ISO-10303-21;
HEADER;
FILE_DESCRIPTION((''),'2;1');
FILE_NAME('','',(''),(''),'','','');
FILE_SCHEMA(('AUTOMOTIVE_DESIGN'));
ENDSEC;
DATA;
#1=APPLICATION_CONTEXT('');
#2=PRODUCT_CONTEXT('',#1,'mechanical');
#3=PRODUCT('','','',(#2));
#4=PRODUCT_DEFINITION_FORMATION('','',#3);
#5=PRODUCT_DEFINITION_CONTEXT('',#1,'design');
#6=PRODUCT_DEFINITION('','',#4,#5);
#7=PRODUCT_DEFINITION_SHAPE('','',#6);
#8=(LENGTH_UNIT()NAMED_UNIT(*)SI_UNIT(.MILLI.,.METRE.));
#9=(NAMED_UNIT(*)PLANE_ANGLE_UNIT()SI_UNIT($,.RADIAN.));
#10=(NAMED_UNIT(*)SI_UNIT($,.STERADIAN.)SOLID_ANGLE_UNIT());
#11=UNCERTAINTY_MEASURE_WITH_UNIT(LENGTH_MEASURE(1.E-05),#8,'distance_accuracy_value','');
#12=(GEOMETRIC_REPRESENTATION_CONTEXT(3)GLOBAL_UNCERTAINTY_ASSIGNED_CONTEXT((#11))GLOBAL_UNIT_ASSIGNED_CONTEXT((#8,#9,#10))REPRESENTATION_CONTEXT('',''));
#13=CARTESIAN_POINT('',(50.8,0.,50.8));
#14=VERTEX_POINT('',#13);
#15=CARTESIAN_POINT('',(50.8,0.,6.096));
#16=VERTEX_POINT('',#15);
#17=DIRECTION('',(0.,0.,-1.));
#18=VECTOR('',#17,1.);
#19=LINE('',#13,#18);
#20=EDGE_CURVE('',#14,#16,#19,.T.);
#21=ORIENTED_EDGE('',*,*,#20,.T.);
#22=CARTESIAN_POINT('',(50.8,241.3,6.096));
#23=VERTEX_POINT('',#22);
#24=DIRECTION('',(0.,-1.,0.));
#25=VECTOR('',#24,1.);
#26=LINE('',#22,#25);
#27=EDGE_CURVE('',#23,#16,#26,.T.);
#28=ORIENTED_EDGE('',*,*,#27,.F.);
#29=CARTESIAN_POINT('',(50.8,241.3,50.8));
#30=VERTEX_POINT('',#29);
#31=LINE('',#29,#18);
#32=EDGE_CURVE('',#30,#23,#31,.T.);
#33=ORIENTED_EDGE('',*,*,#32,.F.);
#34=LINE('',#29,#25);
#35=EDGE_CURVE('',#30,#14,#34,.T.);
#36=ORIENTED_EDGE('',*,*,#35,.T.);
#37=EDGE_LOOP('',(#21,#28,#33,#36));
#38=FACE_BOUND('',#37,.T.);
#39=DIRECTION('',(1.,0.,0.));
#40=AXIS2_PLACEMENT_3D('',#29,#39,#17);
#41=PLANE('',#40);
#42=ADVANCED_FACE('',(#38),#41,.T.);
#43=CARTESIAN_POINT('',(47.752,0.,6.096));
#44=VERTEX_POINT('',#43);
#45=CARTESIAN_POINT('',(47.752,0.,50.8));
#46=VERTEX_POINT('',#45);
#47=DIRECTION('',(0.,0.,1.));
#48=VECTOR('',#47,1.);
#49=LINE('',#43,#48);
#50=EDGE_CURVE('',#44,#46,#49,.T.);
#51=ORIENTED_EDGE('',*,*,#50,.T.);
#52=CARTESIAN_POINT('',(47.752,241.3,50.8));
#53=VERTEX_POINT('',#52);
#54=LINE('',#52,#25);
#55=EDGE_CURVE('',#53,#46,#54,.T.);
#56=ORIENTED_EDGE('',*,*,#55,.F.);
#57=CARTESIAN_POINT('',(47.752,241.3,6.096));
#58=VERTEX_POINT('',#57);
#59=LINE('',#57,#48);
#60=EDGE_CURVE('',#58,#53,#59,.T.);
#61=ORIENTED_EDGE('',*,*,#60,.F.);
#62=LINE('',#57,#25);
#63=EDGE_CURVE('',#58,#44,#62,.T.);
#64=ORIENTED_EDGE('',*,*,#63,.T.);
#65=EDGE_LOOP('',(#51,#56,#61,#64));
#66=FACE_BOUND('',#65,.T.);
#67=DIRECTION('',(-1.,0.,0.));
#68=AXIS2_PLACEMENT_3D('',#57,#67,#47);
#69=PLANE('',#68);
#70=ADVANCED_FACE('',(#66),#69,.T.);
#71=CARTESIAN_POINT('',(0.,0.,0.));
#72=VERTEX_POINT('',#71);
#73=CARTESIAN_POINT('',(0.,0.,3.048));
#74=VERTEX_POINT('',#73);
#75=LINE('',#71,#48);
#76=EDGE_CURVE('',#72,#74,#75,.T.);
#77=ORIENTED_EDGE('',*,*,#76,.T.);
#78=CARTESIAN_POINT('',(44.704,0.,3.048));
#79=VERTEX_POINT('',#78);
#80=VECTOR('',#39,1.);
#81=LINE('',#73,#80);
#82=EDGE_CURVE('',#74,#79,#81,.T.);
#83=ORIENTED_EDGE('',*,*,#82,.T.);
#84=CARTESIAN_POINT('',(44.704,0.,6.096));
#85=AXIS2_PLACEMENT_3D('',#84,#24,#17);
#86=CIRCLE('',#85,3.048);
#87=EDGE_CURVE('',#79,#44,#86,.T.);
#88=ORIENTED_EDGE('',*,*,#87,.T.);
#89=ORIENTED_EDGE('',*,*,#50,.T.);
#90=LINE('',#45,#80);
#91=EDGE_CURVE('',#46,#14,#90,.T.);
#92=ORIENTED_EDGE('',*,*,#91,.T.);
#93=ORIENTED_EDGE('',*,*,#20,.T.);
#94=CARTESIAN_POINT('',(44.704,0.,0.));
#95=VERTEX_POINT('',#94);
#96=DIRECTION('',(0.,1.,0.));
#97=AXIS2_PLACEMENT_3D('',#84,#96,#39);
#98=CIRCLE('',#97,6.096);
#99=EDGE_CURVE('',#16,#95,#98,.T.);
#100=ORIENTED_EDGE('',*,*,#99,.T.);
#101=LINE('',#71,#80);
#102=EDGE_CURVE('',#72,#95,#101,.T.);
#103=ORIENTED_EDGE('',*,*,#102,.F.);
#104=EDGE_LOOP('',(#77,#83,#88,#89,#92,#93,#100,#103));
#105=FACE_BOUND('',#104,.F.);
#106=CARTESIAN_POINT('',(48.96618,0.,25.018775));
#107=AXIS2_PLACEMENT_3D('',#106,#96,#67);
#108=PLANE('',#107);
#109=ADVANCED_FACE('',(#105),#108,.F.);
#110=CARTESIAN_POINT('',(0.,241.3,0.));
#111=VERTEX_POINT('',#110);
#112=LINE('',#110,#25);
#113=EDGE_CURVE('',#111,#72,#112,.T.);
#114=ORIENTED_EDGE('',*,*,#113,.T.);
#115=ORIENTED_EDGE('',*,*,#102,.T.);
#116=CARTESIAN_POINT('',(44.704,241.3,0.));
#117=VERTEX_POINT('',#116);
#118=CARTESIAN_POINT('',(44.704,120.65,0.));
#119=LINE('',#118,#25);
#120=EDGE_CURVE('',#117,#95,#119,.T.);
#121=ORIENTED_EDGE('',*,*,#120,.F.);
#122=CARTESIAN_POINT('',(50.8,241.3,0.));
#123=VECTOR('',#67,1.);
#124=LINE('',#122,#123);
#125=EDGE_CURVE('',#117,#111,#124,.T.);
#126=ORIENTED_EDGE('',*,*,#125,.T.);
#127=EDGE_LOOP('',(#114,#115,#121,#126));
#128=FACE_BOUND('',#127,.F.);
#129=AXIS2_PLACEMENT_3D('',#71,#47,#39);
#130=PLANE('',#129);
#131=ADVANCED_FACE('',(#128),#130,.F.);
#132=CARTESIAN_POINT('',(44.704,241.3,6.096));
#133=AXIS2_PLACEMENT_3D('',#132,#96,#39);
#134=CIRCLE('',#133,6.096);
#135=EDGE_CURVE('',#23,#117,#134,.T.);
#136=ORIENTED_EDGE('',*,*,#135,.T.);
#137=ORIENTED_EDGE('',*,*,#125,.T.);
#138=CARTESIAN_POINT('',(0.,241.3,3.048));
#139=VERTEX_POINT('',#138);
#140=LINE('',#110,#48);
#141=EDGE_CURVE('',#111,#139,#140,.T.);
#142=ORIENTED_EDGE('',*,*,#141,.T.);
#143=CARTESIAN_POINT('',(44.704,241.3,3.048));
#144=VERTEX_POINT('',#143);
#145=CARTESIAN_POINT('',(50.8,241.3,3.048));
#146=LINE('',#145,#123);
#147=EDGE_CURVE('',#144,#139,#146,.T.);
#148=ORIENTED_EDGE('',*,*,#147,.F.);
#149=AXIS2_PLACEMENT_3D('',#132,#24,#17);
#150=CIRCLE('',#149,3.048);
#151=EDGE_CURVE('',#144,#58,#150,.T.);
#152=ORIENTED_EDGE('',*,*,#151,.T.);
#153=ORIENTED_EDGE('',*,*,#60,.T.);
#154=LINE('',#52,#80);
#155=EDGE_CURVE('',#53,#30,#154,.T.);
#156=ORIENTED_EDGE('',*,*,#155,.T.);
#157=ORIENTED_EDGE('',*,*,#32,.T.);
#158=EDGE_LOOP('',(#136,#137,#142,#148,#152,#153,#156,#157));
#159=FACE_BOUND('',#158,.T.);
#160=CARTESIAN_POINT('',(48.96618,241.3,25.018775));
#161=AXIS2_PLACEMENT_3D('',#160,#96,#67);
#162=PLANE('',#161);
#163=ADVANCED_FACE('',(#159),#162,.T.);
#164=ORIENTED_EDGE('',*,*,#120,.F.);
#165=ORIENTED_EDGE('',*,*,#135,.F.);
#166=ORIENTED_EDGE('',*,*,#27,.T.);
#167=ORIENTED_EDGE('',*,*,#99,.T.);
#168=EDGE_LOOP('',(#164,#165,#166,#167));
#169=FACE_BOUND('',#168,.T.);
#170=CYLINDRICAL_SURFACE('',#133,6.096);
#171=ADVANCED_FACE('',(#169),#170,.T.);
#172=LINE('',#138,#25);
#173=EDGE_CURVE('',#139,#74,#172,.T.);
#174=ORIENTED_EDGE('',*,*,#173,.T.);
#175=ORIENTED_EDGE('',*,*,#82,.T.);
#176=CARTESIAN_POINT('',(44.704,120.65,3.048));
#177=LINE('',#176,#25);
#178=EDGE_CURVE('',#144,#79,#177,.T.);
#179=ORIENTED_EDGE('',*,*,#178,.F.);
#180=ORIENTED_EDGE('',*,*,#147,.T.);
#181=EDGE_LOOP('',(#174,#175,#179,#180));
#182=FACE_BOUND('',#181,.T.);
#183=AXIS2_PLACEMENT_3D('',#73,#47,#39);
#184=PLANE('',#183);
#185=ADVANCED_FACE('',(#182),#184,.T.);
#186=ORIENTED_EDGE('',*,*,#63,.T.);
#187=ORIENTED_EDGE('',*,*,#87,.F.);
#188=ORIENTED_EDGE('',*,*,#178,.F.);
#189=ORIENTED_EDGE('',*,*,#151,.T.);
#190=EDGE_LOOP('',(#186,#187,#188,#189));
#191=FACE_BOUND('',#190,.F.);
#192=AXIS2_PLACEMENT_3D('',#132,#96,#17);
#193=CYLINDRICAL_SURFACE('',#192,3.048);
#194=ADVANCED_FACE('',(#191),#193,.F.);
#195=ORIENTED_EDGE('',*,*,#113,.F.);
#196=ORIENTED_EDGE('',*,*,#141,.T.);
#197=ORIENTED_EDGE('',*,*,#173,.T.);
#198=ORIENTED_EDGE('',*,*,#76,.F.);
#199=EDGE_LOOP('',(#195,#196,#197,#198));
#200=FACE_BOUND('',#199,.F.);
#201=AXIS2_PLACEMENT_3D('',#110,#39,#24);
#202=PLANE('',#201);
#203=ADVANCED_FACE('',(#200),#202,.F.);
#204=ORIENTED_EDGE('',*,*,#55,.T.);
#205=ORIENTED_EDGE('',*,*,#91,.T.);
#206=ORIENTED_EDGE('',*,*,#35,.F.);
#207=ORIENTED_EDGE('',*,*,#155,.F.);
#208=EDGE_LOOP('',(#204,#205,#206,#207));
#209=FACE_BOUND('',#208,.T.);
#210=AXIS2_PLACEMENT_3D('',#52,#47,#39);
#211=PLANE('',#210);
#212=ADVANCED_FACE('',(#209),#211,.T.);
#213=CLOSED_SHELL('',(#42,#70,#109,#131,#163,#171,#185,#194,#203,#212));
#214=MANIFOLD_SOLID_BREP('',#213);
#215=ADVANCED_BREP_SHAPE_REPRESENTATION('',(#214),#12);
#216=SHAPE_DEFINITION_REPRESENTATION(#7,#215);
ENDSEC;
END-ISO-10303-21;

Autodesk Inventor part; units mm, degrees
ref_plane "YZ Plane" through (0, 0, 0) normal (1, 0, 0) x (0, 1, 0)
ref_plane "XZ Plane" through (0, 0, 0) normal (0, 1, 0) x (-1, 0, 0)
ref_plane "XY Plane" through (0, 0, 0) normal (0, 0, 1) x (1, 0, 0)
sketch "Sketch1" plane through (0, 0, 0) normal (0, 0, 1) x (1, 0, 0)
  line L0 (0, 0) -> (50.8, 0)
  line L1 (50.8, 0) -> (50.8, 241.3)
  line L2 (50.8, 241.3) -> (0, 241.3)
  line L3 (0, 241.3) -> (0, 0)
  dimension "d0" = 50.8
  dimension "d1" = 241.3
extrude "Plate1" add sketch "Sketch1" along normal blind 3.048
sketch "Sketch2" plane through (47.752, 241.3, 0) normal (1, 0, 0) x (0, 1, 0)
  line L0 (-241.3, 0) -> (0, 0)
  line L1 (0, 0) -> (0, 50.8)
  line L2 (0, 50.8) -> (-241.3, 50.8)
  line L3 (-241.3, 50.8) -> (-241.3, 0)
edge flange "Flange1" height 50.8 angle 90 thickness 3.048 bend radius 3.048 thickness toward (1, 0, 0) relief tear relief width 3.048 relief depth 1.524 edges at (50.8, 120.65, 3.048) wall of the first edge with corners at (47.752, 0, 0) (47.752, 241.3, 0) (47.752, 241.3, 50.8) (47.752, 0, 50.8)
bend "Bend1"
corner "Corner1"
equation "\"d3\" = BendReliefWidth"
equation "\"d4\" = BendReliefDepth"
equation "\"d5\" = MinimumRemnant"
equation "\"d6\" = BendRadius"
equation "\"d9\" = BendRadius"
equation "\"d10\" = CornerReliefSize"
equation "\"d11\" = GapSize"
equation "\"d12\" = JacobiRadiusSize"
equation "\"BendRadius\" = Thickness"
equation "\"BendReliefWidth\" = Thickness"
equation "\"BendReliefDepth\" = 0.5 * Thickness"
equation "\"CornerReliefSize\" = 4 * Thickness"
equation "\"MinimumRemnant\" = 2 * Thickness"
equation "\"TransitionRadius\" = BendRadius"
equation "\"JacobiRadiusSize\" = BendRadius"
equation "\"GapSize\" = Thickness"
equation "\"d2\" = BendRadius"
equation "\"Thickness\" = 3.048"
properties part number "Elevator Car - L bracket"
